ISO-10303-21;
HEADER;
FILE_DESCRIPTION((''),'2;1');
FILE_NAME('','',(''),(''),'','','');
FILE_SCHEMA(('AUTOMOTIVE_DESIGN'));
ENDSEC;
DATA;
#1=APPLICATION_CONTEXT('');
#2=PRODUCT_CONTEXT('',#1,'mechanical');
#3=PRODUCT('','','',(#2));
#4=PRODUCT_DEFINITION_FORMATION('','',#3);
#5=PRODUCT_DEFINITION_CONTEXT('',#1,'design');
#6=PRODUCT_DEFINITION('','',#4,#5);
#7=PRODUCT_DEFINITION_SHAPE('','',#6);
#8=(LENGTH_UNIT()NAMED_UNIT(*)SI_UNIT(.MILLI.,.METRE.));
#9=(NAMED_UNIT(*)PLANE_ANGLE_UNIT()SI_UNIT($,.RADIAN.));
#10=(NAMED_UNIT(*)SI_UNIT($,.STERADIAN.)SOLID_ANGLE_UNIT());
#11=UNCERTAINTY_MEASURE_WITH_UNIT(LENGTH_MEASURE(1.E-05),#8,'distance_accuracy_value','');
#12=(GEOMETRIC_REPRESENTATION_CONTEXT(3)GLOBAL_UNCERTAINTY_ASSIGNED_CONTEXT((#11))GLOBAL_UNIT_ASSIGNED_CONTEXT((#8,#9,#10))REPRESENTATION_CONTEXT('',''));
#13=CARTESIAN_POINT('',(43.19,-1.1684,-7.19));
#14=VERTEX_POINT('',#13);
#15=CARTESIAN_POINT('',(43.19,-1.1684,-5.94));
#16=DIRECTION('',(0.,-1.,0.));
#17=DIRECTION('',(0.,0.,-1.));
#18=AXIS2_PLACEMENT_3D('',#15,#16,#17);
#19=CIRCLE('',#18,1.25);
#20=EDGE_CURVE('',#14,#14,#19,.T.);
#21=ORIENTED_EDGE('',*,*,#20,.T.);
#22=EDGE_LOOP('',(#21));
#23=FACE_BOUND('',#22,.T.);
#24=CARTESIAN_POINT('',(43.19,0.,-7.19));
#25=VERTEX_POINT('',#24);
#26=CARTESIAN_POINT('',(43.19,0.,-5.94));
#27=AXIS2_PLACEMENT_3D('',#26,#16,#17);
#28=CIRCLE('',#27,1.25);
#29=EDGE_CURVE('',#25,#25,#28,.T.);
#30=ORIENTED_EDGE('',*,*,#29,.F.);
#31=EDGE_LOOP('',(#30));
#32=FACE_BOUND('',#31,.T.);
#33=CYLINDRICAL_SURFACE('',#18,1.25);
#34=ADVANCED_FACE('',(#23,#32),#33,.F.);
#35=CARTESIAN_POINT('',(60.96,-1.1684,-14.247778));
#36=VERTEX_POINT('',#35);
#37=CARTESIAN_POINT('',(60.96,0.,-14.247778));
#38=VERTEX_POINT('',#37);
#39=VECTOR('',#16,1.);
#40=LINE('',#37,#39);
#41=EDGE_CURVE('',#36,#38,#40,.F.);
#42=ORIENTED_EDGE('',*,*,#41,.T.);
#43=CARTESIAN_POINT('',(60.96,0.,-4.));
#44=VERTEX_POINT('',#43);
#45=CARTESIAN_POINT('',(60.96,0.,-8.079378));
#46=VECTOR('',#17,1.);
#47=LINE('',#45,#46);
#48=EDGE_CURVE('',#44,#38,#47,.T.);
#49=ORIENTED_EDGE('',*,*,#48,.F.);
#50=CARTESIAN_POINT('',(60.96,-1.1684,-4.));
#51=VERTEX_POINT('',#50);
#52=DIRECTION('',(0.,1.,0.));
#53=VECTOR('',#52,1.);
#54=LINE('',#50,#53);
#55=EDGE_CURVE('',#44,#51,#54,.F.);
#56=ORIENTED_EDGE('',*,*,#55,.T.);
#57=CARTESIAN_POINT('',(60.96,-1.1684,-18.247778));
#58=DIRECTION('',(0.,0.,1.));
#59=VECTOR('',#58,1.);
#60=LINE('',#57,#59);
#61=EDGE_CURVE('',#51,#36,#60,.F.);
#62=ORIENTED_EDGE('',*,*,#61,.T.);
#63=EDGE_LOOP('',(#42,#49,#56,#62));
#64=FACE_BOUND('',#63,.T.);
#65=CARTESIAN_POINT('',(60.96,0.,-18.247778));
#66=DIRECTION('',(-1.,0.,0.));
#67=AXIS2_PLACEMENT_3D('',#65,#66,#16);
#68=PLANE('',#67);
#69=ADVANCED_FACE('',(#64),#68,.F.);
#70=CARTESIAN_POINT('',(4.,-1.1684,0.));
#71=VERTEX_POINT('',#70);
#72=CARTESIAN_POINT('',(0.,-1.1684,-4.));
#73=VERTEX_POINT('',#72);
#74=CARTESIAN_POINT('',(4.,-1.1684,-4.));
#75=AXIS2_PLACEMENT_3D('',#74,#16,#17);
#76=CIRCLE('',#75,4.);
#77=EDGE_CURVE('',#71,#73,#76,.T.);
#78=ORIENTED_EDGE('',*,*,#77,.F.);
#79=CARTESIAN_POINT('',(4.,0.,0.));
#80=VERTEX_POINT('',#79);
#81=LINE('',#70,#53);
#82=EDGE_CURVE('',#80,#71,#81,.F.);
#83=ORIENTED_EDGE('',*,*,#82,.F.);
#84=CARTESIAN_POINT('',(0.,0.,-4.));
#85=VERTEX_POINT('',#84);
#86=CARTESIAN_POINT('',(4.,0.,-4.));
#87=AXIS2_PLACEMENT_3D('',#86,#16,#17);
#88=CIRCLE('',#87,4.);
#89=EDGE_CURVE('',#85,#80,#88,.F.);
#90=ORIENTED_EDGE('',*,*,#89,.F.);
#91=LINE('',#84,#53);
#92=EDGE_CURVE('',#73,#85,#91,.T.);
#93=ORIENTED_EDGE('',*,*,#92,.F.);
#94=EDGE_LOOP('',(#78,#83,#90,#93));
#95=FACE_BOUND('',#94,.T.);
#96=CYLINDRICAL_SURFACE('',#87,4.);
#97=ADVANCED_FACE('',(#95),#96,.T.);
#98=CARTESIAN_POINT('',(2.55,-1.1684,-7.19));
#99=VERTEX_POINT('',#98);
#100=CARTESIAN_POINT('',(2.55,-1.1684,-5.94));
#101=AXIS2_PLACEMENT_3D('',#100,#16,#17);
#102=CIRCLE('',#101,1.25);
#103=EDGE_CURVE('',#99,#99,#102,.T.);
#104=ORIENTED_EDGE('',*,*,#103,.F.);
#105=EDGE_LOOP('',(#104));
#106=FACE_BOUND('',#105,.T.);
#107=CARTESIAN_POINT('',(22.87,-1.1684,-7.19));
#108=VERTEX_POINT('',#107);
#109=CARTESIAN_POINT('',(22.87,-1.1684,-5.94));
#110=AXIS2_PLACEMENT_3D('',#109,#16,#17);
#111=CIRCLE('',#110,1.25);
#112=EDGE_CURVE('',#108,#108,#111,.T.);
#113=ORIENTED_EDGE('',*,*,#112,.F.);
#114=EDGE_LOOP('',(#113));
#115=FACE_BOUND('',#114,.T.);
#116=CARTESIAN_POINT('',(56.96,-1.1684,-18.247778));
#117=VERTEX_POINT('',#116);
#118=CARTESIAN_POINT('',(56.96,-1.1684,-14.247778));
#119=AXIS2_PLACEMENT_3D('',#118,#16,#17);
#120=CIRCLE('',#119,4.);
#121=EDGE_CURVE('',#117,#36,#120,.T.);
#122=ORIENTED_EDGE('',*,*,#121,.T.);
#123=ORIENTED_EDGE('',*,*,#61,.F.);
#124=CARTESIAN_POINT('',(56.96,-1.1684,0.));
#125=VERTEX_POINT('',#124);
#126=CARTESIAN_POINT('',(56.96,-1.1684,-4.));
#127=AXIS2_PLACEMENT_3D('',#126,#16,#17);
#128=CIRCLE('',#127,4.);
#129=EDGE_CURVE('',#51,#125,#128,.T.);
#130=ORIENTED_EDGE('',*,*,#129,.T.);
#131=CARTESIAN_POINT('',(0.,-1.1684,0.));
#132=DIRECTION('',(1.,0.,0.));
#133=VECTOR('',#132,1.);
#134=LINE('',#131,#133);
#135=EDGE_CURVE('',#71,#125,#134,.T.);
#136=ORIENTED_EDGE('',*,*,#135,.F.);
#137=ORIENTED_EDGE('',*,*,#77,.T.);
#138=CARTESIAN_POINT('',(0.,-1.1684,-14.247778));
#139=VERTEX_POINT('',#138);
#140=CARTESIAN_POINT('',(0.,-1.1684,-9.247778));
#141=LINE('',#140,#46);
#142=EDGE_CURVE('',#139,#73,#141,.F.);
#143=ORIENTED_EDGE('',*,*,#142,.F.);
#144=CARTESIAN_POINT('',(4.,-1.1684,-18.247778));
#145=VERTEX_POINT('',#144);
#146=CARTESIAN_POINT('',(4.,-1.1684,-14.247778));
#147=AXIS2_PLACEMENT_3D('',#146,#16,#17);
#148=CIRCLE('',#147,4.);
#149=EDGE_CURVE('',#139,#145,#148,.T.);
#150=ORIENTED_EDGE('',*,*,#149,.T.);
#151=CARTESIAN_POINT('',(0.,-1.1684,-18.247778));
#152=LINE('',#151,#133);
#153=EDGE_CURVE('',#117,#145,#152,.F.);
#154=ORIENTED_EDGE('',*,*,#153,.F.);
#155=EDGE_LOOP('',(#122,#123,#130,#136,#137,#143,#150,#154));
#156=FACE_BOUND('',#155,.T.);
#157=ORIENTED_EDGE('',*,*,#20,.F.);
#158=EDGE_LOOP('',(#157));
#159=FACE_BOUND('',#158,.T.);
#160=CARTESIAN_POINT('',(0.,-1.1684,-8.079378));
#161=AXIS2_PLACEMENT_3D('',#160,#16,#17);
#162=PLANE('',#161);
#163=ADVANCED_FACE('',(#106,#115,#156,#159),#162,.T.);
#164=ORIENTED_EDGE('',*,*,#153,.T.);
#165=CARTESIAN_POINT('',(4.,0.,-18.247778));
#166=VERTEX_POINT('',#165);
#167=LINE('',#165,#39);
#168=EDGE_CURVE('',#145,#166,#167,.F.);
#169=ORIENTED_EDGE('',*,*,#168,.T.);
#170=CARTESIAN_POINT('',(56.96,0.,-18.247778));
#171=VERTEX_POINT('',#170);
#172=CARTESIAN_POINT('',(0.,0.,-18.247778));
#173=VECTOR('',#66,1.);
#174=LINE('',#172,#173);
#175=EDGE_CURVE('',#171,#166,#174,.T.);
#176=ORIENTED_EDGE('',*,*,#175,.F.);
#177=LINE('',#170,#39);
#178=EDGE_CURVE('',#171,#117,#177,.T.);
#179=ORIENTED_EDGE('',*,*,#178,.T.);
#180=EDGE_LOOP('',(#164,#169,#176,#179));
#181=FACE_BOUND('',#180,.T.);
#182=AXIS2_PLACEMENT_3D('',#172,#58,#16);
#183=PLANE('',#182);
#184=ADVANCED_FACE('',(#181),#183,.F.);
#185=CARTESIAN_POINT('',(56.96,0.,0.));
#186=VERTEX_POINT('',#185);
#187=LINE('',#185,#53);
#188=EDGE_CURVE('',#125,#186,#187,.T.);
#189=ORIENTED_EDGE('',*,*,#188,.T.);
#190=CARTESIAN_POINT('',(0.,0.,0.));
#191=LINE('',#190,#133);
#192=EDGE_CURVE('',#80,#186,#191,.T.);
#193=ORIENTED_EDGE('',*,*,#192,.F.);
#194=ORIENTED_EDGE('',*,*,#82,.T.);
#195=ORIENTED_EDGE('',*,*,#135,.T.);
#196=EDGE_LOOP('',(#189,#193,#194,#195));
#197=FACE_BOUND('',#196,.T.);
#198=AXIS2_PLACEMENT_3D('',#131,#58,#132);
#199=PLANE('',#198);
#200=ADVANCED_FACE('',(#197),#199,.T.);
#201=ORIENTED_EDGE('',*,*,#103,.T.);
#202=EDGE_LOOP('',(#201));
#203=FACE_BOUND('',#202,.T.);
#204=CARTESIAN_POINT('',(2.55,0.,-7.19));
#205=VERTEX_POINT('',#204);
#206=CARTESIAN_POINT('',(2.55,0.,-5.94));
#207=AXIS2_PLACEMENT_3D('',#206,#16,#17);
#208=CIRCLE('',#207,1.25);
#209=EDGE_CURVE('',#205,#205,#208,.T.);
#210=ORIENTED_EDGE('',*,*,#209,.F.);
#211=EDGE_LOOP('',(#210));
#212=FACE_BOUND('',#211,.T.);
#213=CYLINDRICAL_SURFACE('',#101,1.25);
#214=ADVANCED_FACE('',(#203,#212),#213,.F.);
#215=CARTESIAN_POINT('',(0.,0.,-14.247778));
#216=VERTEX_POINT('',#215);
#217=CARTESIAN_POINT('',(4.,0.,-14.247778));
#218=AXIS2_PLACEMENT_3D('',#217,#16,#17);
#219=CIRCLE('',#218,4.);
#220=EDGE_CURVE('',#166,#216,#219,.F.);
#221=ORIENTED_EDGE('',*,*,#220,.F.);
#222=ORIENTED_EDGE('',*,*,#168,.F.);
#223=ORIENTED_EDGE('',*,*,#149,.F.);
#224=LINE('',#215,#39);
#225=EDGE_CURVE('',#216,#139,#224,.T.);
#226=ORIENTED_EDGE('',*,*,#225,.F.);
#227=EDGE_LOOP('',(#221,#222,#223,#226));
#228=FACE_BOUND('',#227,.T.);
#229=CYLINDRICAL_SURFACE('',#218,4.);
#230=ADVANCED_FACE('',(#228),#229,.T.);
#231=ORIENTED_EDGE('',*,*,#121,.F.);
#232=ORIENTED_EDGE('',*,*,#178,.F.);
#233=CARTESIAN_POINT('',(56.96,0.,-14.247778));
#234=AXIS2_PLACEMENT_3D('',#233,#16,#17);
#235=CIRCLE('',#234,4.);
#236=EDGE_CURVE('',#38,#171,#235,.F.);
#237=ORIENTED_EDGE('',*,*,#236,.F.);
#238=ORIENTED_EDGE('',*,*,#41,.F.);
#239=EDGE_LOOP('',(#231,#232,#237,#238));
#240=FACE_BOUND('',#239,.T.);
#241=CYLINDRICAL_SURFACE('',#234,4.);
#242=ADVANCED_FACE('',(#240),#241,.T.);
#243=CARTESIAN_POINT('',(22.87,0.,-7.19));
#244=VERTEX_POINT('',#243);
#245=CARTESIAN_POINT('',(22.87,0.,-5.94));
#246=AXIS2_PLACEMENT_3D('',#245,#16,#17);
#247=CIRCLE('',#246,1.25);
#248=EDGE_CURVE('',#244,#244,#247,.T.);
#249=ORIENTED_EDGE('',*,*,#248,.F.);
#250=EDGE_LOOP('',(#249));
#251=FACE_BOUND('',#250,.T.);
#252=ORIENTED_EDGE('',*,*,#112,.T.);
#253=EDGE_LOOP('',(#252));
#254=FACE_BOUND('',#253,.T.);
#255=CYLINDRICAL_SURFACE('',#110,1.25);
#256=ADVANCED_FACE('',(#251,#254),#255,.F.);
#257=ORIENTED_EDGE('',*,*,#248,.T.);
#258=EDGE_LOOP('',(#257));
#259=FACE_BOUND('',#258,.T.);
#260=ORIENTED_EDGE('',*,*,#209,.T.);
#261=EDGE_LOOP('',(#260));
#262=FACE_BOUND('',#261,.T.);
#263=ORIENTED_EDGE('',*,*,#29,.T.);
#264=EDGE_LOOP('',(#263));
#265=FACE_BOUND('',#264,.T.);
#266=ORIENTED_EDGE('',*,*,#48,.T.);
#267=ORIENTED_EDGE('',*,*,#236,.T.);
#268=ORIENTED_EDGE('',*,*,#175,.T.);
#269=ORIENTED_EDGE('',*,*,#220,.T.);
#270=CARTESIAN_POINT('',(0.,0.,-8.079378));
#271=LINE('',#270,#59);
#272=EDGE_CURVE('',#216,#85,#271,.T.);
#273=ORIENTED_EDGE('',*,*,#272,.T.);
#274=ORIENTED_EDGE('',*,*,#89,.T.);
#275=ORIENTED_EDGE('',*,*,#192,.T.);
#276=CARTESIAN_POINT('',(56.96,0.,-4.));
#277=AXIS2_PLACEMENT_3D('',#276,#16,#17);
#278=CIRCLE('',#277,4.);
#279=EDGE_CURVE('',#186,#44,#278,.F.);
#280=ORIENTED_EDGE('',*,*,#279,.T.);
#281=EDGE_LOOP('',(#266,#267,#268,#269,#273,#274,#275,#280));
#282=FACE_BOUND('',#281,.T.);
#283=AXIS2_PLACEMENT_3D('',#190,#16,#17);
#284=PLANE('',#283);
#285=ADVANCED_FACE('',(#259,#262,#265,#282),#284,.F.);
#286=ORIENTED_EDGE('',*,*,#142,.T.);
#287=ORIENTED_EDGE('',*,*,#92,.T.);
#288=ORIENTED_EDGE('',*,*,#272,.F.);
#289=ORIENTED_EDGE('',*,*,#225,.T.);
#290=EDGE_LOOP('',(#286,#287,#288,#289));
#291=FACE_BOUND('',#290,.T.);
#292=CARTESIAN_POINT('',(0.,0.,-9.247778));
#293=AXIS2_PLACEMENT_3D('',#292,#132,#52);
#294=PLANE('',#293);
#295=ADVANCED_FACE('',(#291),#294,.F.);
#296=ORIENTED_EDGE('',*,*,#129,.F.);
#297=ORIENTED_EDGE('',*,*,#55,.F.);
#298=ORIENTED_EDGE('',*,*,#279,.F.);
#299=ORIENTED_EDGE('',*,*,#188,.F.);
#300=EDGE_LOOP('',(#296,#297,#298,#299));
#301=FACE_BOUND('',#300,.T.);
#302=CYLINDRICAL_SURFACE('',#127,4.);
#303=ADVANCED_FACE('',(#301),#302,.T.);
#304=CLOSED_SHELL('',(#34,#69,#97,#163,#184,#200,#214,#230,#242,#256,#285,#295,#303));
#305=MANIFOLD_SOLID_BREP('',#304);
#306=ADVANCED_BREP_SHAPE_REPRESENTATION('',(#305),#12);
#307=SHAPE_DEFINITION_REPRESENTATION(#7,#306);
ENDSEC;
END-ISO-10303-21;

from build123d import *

# Parameters (mm, degrees)
SKETCH1_W                    = 60.96
SKETCH1_H                    = 10
BASE_FLANGE1_DEPTH           = 1.1684
EDGE_FLANGE1_STRIP_W         = 7.0104
EDGE_FLANGE1_STRIP_H         = 1.1684
EDGE_FLANGE1_STRIP_CUT_DEPTH = 60.96
EDGE_FLANGE1_DEPTH           = 60.96
TAP_DRILL_FOR_M3X0_5_TAP1_D  = 2.5
FILLET1_DEPTH                = 60.96
FILLET1_2_DEPTH              = 60.96
FILLET1_START                = -2
FILLET1_3_DEPTH              = 3


with BuildPart() as part:
    # Base-Flange1: sheet metal written as solids
    # Sketch1 → Base-Flange1 (new body)
    with BuildSketch(Plane(origin=(0, 0, 0), x_dir=(1, 0, 0), z_dir=(0, 1, 0))):
        with Locations((30.48, 5)):
            Rectangle(SKETCH1_W, SKETCH1_H)
    extrude(amount=-BASE_FLANGE1_DEPTH)

    # Edge-Flange1: sheet metal written as solids
    # Edge-Flange1 strip (on a plane across the edge) → Edge-Flange1 strip cut (cut)
    with BuildSketch(Plane(origin=(0, -1.1684, -10), x_dir=(0, 0, 1), z_dir=(1, 0, 0))):
        with Locations((-1.1684, -0.5842)):
            Rectangle(EDGE_FLANGE1_STRIP_W, EDGE_FLANGE1_STRIP_H)
    extrude(amount=EDGE_FLANGE1_STRIP_CUT_DEPTH, mode=Mode.SUBTRACT)

    # Edge-Flange1 section (on a plane across the edge) → Edge-Flange1 (add)
    with BuildSketch(Plane(origin=(0, -1.1684, -10), x_dir=(0, 0, 1), z_dir=(1, 0, 0))):
        with BuildLine():
            Line((0, 1.1684), (0, 9))
            Line((0, 9), (1.1684, 9))
            Line((1.1684, 9), (1.1684, 1.1684))
            ThreePointArc((1.1684, 1.1684), (1.510616437, 0.342216437), (2.3368, 0))
            Line((2.3368, 0), (2.3368, -1.1684))
            ThreePointArc((2.3368, -1.1684), (0.684432874, -0.483967126), (0, 1.1684))
        make_face()
    extrude(amount=EDGE_FLANGE1_DEPTH)

    # Tap Drill for M3x0.5 Tap1 (through all)
    with Locations(Plane(origin=(0, -1.1684, 0), x_dir=(-1, 0, 0), z_dir=(0, -1, 0))):
        with Locations((-2.55, 5.94), (-22.87, 5.94), (-43.19, 5.94)):
            Hole(TAP_DRILL_FOR_M3X0_5_TAP1_D / 2)

    # Fillet1: read off the stored shape, not the designer's step
    # Fillet1 outline → Fillet1 (cut)
    with BuildSketch(Plane.YZ):
        with BuildLine():
            ThreePointArc((-2.3368, -10), (-1.731991655, -9.920375471), (-1.1684, -9.686928163))
            Line((-1.1684, -9.686928163), (-1.1684, -7.6632))
            ThreePointArc((-1.1684, -7.6632), (-1.510616437, -8.489383563), (-2.3368, -8.8316))
            Line((-2.3368, -8.8316), (-10.1684, -8.8316))
            Line((-10.1684, -8.8316), (-10.1684, -10))
            Line((-10.1684, -10), (-2.3368, -10))
        make_face()
    extrude(amount=FILLET1_DEPTH, mode=Mode.SUBTRACT)

    # Fillet1 2 outline → Fillet1 2 (add)
    with BuildSketch(Plane.YZ):
        with BuildLine():
            Line((0, -18.247777642), (0, -7.6632))
            ThreePointArc((0, -7.6632), (-0.313071837, -8.8316), (-1.1684, -9.686928163))
            Line((-1.1684, -9.686928163), (-1.1684, -18.247777642))
            Line((-1.1684, -18.247777642), (0, -18.247777642))
        make_face()
    extrude(amount=FILLET1_2_DEPTH)

    # Fillet1 3 outline → Fillet1 3 (cut)
    with BuildSketch(Plane(origin=(0, 0, 0), x_dir=(1, 0, 0), z_dir=(0, 1, 0)).offset(FILLET1_START)):
        with BuildLine():
            Line((60.96, 18.247777642), (56.96, 18.247777642))
            ThreePointArc((56.96, 18.247777642), (59.788427125, 17.076204767), (60.96, 14.247777642))
            Line((60.96, 14.247777642), (60.96, 18.247777642))
        make_face()
        with BuildLine():
            ThreePointArc((0, 14.247777642), (1.171572875, 17.076204767), (4, 18.247777642))
            Line((4, 18.247777642), (0, 18.247777642))
            Line((0, 18.247777642), (0, 14.247777642))
        make_face()
        with BuildLine():
            Line((60.96, 0), (60.96, 4))
            ThreePointArc((60.96, 4), (59.788427125, 1.171572875), (56.96, 0))
            Line((56.96, 0), (60.96, 0))
        make_face()
        with BuildLine():
            ThreePointArc((4, 0), (1.171572875, 1.171572875), (0, 4))
            Line((0, 4), (0, 0))
            Line((0, 0), (4, 0))
        make_face()
    extrude(amount=FILLET1_3_DEPTH, mode=Mode.SUBTRACT)


solid = part.part
